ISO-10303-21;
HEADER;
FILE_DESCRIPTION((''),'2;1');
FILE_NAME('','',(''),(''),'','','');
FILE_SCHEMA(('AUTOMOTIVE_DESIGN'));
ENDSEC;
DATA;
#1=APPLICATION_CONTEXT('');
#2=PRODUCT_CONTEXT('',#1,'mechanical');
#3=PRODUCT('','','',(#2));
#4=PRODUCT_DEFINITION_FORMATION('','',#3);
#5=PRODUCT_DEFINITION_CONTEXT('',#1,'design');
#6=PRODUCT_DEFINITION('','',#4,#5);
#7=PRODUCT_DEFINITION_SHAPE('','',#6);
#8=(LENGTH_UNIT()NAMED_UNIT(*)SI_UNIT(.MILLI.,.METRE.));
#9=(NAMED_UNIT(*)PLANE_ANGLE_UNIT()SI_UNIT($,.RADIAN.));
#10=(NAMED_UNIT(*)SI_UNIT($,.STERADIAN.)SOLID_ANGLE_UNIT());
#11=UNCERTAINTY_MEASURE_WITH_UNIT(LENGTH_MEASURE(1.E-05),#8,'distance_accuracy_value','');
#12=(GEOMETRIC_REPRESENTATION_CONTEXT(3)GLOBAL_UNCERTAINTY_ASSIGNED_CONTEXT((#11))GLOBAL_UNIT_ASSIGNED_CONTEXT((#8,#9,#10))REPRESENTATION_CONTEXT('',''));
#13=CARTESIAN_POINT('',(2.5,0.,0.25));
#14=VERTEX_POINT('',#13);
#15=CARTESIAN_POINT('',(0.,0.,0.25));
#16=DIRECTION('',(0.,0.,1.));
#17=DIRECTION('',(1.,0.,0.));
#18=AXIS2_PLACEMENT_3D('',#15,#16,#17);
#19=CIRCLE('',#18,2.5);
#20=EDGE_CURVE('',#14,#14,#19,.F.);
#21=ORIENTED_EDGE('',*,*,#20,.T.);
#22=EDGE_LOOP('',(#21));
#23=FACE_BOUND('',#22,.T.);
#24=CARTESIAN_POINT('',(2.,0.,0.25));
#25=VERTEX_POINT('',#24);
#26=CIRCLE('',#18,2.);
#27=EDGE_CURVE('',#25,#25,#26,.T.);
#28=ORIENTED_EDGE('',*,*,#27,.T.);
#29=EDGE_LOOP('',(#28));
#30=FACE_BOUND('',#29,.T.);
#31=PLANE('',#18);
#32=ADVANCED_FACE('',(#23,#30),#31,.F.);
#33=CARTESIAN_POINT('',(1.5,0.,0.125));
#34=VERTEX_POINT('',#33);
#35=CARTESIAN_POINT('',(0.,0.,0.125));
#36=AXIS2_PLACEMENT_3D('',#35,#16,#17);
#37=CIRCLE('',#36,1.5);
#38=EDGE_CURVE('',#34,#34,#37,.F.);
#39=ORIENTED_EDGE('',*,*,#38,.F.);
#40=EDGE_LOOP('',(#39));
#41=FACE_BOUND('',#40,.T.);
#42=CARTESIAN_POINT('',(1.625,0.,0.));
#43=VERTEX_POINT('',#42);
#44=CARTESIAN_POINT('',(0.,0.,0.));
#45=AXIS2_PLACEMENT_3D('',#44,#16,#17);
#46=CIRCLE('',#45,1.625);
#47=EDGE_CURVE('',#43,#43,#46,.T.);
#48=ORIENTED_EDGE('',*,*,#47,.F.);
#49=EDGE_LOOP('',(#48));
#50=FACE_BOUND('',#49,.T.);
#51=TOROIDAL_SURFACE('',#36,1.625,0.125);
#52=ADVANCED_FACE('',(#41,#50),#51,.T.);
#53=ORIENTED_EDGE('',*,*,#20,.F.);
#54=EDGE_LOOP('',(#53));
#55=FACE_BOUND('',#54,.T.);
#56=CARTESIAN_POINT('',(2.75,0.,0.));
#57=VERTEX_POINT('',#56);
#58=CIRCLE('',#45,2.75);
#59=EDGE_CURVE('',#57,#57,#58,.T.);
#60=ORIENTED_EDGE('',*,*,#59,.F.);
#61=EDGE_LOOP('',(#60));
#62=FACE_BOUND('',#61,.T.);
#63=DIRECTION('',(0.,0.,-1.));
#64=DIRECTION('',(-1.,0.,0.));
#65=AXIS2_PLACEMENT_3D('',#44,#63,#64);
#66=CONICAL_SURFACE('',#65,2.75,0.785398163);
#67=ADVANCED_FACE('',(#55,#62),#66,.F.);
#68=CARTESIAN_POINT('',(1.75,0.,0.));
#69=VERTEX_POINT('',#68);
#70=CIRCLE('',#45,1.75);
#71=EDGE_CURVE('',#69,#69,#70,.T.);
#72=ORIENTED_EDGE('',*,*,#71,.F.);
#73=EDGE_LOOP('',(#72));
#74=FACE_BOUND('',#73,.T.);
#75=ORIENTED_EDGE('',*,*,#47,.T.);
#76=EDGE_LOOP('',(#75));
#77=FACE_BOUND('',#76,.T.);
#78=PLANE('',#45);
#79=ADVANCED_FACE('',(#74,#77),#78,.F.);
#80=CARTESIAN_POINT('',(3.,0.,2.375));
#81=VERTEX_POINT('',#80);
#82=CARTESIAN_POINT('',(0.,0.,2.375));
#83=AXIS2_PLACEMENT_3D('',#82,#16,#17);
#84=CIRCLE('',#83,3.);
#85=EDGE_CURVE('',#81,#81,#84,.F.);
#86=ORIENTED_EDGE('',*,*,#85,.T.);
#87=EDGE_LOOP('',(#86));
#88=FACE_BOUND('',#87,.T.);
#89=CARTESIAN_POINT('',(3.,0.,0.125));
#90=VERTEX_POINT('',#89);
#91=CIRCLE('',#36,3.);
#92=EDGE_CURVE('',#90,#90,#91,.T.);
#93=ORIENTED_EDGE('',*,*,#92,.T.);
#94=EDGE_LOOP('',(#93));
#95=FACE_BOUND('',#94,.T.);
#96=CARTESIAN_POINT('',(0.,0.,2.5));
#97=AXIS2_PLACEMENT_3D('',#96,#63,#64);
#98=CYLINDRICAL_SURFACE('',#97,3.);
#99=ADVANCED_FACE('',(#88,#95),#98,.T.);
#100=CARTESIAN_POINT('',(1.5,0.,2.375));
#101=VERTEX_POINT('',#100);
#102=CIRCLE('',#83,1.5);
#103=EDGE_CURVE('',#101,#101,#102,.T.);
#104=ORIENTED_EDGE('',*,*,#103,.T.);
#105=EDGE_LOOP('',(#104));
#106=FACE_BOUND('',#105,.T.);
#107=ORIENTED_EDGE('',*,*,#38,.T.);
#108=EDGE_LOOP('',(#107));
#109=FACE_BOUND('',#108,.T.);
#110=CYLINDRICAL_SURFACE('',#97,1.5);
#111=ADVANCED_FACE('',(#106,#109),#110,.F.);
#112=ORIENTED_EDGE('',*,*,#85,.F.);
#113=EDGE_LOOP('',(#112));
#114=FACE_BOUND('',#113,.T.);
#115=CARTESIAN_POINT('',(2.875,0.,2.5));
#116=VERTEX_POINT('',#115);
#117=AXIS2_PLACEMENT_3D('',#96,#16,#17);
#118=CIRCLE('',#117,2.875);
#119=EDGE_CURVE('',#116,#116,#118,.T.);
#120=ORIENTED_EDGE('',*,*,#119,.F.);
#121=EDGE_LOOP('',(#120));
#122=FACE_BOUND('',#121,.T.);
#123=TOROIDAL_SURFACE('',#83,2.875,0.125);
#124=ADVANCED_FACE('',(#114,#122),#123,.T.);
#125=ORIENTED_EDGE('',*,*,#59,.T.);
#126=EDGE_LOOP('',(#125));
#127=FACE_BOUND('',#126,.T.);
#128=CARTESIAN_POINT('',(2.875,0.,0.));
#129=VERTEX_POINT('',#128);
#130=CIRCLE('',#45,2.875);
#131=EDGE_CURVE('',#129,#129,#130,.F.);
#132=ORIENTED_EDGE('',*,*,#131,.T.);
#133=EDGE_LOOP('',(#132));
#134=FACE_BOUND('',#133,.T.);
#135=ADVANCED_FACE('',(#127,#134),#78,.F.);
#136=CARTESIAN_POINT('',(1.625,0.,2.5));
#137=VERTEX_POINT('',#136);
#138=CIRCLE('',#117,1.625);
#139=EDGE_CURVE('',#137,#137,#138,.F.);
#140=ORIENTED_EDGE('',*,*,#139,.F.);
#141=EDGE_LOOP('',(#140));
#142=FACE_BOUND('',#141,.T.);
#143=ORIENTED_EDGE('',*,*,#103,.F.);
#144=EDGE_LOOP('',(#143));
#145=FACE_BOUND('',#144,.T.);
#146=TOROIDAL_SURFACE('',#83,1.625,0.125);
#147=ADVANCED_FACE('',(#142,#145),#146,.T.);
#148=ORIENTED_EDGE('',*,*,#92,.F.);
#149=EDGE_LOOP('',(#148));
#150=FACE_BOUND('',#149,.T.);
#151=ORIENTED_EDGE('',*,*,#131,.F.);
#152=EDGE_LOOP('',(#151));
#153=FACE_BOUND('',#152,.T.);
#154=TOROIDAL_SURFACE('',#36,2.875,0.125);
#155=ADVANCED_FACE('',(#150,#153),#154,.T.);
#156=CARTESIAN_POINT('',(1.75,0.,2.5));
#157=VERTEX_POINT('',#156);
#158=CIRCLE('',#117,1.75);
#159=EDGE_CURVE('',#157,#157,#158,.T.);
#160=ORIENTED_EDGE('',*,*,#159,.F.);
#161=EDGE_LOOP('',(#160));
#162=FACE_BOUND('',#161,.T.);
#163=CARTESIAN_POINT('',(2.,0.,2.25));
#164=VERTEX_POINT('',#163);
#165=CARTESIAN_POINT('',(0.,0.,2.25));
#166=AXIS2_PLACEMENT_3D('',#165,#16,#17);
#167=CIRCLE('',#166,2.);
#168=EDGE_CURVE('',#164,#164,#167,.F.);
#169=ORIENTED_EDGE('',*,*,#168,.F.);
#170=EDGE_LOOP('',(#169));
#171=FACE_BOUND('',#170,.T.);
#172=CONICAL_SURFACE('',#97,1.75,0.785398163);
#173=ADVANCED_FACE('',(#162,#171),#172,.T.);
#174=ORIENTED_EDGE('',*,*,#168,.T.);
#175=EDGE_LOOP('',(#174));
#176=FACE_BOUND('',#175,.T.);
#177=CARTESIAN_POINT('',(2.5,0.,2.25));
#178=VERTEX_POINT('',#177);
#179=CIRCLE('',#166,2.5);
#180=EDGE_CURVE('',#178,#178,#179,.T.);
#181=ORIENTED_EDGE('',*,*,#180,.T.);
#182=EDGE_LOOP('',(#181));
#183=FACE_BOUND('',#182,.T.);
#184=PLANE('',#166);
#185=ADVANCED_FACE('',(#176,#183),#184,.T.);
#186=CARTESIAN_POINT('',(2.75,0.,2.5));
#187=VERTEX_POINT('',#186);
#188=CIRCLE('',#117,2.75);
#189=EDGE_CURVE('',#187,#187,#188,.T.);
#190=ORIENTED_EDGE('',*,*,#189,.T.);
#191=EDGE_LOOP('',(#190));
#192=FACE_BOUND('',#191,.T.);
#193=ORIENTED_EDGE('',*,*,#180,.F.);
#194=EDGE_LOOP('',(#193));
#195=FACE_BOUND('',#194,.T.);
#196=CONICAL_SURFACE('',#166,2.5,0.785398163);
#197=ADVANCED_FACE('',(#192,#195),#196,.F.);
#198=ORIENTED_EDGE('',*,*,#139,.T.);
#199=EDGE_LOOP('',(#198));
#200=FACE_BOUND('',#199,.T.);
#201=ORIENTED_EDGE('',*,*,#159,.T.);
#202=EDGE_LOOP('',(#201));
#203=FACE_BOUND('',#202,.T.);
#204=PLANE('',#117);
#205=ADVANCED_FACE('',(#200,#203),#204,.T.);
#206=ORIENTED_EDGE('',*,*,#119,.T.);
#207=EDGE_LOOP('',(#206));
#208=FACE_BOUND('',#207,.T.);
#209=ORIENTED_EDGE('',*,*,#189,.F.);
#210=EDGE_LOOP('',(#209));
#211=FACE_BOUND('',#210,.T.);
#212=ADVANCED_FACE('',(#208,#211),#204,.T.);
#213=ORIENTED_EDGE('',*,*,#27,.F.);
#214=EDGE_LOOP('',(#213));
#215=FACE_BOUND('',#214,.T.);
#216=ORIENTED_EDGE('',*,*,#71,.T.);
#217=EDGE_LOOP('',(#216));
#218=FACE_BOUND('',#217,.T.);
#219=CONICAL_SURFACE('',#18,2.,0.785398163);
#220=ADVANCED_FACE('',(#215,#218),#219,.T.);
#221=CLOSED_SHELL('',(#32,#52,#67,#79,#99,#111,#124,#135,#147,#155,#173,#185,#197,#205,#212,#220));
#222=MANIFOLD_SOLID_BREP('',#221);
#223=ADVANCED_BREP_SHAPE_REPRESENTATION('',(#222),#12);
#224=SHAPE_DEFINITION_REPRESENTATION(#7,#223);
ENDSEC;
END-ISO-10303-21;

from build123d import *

# Parameters (mm, degrees)
SKETCH1_R           = 3
SKETCH1_R_2         = 1.5
BOSS_EXTRUDE1_DEPTH = 2.5
SKETCH2_R           = 2.75
SKETCH2_R_2         = 1.75
CUT_EXTRUDE1_DEPTH  = 0.25
CUT_EXTRUDE2_START  = -2.25
SKETCH2_2_R         = 2.75
SKETCH2_2_R_2       = 1.75
CUT_EXTRUDE2_DEPTH  = 0.25
FILLET1_R           = 0.125
CHAMFER1_SIZE       = 0.25


with BuildPart() as part:
    # Sketch1 → Boss-Extrude1 (new body)
    with BuildSketch(Plane.XY):
        Circle(SKETCH1_R)
        Circle(SKETCH1_R_2, mode=Mode.SUBTRACT)
    extrude(amount=BOSS_EXTRUDE1_DEPTH)

    # Sketch2 → Cut-Extrude1 (cut)
    with BuildSketch(Plane.XY.offset(2.5)):
        Circle(SKETCH2_R)
        Circle(SKETCH2_R_2, mode=Mode.SUBTRACT)
    extrude(amount=-CUT_EXTRUDE1_DEPTH, mode=Mode.SUBTRACT)

    # Sketch2<2> → Cut-Extrude2 (cut)
    with BuildSketch(Plane.XY.offset(2.5).offset(CUT_EXTRUDE2_START)):
        Circle(SKETCH2_2_R)
        Circle(SKETCH2_2_R_2, mode=Mode.SUBTRACT)
    extrude(amount=-CUT_EXTRUDE2_DEPTH, mode=Mode.SUBTRACT)

    # Fillet1
    fillet1_edges = [part.edges().sort_by_distance(p)[0] for p in [
        (-3, 0, 0),
        (-3, 0, 2.5),
        (-1.5, 0, 0),
        (-1.5, 0, 2.5),
    ]]
    fillet(fillet1_edges, radius=FILLET1_R)

    # Chamfer1
    chamfer1_edges = [part.edges().sort_by_distance(p)[0] for p in [
        (-2.75, 0, 2.25),
        (-1.75, 0, 2.25),
        (-2.75, 0, 0.25),
        (-1.75, 0, 0.25),
    ]]
    chamfer(chamfer1_edges, length=CHAMFER1_SIZE - 0.0001)  # a hair under: the kernel refuses the full size


solid = part.part
